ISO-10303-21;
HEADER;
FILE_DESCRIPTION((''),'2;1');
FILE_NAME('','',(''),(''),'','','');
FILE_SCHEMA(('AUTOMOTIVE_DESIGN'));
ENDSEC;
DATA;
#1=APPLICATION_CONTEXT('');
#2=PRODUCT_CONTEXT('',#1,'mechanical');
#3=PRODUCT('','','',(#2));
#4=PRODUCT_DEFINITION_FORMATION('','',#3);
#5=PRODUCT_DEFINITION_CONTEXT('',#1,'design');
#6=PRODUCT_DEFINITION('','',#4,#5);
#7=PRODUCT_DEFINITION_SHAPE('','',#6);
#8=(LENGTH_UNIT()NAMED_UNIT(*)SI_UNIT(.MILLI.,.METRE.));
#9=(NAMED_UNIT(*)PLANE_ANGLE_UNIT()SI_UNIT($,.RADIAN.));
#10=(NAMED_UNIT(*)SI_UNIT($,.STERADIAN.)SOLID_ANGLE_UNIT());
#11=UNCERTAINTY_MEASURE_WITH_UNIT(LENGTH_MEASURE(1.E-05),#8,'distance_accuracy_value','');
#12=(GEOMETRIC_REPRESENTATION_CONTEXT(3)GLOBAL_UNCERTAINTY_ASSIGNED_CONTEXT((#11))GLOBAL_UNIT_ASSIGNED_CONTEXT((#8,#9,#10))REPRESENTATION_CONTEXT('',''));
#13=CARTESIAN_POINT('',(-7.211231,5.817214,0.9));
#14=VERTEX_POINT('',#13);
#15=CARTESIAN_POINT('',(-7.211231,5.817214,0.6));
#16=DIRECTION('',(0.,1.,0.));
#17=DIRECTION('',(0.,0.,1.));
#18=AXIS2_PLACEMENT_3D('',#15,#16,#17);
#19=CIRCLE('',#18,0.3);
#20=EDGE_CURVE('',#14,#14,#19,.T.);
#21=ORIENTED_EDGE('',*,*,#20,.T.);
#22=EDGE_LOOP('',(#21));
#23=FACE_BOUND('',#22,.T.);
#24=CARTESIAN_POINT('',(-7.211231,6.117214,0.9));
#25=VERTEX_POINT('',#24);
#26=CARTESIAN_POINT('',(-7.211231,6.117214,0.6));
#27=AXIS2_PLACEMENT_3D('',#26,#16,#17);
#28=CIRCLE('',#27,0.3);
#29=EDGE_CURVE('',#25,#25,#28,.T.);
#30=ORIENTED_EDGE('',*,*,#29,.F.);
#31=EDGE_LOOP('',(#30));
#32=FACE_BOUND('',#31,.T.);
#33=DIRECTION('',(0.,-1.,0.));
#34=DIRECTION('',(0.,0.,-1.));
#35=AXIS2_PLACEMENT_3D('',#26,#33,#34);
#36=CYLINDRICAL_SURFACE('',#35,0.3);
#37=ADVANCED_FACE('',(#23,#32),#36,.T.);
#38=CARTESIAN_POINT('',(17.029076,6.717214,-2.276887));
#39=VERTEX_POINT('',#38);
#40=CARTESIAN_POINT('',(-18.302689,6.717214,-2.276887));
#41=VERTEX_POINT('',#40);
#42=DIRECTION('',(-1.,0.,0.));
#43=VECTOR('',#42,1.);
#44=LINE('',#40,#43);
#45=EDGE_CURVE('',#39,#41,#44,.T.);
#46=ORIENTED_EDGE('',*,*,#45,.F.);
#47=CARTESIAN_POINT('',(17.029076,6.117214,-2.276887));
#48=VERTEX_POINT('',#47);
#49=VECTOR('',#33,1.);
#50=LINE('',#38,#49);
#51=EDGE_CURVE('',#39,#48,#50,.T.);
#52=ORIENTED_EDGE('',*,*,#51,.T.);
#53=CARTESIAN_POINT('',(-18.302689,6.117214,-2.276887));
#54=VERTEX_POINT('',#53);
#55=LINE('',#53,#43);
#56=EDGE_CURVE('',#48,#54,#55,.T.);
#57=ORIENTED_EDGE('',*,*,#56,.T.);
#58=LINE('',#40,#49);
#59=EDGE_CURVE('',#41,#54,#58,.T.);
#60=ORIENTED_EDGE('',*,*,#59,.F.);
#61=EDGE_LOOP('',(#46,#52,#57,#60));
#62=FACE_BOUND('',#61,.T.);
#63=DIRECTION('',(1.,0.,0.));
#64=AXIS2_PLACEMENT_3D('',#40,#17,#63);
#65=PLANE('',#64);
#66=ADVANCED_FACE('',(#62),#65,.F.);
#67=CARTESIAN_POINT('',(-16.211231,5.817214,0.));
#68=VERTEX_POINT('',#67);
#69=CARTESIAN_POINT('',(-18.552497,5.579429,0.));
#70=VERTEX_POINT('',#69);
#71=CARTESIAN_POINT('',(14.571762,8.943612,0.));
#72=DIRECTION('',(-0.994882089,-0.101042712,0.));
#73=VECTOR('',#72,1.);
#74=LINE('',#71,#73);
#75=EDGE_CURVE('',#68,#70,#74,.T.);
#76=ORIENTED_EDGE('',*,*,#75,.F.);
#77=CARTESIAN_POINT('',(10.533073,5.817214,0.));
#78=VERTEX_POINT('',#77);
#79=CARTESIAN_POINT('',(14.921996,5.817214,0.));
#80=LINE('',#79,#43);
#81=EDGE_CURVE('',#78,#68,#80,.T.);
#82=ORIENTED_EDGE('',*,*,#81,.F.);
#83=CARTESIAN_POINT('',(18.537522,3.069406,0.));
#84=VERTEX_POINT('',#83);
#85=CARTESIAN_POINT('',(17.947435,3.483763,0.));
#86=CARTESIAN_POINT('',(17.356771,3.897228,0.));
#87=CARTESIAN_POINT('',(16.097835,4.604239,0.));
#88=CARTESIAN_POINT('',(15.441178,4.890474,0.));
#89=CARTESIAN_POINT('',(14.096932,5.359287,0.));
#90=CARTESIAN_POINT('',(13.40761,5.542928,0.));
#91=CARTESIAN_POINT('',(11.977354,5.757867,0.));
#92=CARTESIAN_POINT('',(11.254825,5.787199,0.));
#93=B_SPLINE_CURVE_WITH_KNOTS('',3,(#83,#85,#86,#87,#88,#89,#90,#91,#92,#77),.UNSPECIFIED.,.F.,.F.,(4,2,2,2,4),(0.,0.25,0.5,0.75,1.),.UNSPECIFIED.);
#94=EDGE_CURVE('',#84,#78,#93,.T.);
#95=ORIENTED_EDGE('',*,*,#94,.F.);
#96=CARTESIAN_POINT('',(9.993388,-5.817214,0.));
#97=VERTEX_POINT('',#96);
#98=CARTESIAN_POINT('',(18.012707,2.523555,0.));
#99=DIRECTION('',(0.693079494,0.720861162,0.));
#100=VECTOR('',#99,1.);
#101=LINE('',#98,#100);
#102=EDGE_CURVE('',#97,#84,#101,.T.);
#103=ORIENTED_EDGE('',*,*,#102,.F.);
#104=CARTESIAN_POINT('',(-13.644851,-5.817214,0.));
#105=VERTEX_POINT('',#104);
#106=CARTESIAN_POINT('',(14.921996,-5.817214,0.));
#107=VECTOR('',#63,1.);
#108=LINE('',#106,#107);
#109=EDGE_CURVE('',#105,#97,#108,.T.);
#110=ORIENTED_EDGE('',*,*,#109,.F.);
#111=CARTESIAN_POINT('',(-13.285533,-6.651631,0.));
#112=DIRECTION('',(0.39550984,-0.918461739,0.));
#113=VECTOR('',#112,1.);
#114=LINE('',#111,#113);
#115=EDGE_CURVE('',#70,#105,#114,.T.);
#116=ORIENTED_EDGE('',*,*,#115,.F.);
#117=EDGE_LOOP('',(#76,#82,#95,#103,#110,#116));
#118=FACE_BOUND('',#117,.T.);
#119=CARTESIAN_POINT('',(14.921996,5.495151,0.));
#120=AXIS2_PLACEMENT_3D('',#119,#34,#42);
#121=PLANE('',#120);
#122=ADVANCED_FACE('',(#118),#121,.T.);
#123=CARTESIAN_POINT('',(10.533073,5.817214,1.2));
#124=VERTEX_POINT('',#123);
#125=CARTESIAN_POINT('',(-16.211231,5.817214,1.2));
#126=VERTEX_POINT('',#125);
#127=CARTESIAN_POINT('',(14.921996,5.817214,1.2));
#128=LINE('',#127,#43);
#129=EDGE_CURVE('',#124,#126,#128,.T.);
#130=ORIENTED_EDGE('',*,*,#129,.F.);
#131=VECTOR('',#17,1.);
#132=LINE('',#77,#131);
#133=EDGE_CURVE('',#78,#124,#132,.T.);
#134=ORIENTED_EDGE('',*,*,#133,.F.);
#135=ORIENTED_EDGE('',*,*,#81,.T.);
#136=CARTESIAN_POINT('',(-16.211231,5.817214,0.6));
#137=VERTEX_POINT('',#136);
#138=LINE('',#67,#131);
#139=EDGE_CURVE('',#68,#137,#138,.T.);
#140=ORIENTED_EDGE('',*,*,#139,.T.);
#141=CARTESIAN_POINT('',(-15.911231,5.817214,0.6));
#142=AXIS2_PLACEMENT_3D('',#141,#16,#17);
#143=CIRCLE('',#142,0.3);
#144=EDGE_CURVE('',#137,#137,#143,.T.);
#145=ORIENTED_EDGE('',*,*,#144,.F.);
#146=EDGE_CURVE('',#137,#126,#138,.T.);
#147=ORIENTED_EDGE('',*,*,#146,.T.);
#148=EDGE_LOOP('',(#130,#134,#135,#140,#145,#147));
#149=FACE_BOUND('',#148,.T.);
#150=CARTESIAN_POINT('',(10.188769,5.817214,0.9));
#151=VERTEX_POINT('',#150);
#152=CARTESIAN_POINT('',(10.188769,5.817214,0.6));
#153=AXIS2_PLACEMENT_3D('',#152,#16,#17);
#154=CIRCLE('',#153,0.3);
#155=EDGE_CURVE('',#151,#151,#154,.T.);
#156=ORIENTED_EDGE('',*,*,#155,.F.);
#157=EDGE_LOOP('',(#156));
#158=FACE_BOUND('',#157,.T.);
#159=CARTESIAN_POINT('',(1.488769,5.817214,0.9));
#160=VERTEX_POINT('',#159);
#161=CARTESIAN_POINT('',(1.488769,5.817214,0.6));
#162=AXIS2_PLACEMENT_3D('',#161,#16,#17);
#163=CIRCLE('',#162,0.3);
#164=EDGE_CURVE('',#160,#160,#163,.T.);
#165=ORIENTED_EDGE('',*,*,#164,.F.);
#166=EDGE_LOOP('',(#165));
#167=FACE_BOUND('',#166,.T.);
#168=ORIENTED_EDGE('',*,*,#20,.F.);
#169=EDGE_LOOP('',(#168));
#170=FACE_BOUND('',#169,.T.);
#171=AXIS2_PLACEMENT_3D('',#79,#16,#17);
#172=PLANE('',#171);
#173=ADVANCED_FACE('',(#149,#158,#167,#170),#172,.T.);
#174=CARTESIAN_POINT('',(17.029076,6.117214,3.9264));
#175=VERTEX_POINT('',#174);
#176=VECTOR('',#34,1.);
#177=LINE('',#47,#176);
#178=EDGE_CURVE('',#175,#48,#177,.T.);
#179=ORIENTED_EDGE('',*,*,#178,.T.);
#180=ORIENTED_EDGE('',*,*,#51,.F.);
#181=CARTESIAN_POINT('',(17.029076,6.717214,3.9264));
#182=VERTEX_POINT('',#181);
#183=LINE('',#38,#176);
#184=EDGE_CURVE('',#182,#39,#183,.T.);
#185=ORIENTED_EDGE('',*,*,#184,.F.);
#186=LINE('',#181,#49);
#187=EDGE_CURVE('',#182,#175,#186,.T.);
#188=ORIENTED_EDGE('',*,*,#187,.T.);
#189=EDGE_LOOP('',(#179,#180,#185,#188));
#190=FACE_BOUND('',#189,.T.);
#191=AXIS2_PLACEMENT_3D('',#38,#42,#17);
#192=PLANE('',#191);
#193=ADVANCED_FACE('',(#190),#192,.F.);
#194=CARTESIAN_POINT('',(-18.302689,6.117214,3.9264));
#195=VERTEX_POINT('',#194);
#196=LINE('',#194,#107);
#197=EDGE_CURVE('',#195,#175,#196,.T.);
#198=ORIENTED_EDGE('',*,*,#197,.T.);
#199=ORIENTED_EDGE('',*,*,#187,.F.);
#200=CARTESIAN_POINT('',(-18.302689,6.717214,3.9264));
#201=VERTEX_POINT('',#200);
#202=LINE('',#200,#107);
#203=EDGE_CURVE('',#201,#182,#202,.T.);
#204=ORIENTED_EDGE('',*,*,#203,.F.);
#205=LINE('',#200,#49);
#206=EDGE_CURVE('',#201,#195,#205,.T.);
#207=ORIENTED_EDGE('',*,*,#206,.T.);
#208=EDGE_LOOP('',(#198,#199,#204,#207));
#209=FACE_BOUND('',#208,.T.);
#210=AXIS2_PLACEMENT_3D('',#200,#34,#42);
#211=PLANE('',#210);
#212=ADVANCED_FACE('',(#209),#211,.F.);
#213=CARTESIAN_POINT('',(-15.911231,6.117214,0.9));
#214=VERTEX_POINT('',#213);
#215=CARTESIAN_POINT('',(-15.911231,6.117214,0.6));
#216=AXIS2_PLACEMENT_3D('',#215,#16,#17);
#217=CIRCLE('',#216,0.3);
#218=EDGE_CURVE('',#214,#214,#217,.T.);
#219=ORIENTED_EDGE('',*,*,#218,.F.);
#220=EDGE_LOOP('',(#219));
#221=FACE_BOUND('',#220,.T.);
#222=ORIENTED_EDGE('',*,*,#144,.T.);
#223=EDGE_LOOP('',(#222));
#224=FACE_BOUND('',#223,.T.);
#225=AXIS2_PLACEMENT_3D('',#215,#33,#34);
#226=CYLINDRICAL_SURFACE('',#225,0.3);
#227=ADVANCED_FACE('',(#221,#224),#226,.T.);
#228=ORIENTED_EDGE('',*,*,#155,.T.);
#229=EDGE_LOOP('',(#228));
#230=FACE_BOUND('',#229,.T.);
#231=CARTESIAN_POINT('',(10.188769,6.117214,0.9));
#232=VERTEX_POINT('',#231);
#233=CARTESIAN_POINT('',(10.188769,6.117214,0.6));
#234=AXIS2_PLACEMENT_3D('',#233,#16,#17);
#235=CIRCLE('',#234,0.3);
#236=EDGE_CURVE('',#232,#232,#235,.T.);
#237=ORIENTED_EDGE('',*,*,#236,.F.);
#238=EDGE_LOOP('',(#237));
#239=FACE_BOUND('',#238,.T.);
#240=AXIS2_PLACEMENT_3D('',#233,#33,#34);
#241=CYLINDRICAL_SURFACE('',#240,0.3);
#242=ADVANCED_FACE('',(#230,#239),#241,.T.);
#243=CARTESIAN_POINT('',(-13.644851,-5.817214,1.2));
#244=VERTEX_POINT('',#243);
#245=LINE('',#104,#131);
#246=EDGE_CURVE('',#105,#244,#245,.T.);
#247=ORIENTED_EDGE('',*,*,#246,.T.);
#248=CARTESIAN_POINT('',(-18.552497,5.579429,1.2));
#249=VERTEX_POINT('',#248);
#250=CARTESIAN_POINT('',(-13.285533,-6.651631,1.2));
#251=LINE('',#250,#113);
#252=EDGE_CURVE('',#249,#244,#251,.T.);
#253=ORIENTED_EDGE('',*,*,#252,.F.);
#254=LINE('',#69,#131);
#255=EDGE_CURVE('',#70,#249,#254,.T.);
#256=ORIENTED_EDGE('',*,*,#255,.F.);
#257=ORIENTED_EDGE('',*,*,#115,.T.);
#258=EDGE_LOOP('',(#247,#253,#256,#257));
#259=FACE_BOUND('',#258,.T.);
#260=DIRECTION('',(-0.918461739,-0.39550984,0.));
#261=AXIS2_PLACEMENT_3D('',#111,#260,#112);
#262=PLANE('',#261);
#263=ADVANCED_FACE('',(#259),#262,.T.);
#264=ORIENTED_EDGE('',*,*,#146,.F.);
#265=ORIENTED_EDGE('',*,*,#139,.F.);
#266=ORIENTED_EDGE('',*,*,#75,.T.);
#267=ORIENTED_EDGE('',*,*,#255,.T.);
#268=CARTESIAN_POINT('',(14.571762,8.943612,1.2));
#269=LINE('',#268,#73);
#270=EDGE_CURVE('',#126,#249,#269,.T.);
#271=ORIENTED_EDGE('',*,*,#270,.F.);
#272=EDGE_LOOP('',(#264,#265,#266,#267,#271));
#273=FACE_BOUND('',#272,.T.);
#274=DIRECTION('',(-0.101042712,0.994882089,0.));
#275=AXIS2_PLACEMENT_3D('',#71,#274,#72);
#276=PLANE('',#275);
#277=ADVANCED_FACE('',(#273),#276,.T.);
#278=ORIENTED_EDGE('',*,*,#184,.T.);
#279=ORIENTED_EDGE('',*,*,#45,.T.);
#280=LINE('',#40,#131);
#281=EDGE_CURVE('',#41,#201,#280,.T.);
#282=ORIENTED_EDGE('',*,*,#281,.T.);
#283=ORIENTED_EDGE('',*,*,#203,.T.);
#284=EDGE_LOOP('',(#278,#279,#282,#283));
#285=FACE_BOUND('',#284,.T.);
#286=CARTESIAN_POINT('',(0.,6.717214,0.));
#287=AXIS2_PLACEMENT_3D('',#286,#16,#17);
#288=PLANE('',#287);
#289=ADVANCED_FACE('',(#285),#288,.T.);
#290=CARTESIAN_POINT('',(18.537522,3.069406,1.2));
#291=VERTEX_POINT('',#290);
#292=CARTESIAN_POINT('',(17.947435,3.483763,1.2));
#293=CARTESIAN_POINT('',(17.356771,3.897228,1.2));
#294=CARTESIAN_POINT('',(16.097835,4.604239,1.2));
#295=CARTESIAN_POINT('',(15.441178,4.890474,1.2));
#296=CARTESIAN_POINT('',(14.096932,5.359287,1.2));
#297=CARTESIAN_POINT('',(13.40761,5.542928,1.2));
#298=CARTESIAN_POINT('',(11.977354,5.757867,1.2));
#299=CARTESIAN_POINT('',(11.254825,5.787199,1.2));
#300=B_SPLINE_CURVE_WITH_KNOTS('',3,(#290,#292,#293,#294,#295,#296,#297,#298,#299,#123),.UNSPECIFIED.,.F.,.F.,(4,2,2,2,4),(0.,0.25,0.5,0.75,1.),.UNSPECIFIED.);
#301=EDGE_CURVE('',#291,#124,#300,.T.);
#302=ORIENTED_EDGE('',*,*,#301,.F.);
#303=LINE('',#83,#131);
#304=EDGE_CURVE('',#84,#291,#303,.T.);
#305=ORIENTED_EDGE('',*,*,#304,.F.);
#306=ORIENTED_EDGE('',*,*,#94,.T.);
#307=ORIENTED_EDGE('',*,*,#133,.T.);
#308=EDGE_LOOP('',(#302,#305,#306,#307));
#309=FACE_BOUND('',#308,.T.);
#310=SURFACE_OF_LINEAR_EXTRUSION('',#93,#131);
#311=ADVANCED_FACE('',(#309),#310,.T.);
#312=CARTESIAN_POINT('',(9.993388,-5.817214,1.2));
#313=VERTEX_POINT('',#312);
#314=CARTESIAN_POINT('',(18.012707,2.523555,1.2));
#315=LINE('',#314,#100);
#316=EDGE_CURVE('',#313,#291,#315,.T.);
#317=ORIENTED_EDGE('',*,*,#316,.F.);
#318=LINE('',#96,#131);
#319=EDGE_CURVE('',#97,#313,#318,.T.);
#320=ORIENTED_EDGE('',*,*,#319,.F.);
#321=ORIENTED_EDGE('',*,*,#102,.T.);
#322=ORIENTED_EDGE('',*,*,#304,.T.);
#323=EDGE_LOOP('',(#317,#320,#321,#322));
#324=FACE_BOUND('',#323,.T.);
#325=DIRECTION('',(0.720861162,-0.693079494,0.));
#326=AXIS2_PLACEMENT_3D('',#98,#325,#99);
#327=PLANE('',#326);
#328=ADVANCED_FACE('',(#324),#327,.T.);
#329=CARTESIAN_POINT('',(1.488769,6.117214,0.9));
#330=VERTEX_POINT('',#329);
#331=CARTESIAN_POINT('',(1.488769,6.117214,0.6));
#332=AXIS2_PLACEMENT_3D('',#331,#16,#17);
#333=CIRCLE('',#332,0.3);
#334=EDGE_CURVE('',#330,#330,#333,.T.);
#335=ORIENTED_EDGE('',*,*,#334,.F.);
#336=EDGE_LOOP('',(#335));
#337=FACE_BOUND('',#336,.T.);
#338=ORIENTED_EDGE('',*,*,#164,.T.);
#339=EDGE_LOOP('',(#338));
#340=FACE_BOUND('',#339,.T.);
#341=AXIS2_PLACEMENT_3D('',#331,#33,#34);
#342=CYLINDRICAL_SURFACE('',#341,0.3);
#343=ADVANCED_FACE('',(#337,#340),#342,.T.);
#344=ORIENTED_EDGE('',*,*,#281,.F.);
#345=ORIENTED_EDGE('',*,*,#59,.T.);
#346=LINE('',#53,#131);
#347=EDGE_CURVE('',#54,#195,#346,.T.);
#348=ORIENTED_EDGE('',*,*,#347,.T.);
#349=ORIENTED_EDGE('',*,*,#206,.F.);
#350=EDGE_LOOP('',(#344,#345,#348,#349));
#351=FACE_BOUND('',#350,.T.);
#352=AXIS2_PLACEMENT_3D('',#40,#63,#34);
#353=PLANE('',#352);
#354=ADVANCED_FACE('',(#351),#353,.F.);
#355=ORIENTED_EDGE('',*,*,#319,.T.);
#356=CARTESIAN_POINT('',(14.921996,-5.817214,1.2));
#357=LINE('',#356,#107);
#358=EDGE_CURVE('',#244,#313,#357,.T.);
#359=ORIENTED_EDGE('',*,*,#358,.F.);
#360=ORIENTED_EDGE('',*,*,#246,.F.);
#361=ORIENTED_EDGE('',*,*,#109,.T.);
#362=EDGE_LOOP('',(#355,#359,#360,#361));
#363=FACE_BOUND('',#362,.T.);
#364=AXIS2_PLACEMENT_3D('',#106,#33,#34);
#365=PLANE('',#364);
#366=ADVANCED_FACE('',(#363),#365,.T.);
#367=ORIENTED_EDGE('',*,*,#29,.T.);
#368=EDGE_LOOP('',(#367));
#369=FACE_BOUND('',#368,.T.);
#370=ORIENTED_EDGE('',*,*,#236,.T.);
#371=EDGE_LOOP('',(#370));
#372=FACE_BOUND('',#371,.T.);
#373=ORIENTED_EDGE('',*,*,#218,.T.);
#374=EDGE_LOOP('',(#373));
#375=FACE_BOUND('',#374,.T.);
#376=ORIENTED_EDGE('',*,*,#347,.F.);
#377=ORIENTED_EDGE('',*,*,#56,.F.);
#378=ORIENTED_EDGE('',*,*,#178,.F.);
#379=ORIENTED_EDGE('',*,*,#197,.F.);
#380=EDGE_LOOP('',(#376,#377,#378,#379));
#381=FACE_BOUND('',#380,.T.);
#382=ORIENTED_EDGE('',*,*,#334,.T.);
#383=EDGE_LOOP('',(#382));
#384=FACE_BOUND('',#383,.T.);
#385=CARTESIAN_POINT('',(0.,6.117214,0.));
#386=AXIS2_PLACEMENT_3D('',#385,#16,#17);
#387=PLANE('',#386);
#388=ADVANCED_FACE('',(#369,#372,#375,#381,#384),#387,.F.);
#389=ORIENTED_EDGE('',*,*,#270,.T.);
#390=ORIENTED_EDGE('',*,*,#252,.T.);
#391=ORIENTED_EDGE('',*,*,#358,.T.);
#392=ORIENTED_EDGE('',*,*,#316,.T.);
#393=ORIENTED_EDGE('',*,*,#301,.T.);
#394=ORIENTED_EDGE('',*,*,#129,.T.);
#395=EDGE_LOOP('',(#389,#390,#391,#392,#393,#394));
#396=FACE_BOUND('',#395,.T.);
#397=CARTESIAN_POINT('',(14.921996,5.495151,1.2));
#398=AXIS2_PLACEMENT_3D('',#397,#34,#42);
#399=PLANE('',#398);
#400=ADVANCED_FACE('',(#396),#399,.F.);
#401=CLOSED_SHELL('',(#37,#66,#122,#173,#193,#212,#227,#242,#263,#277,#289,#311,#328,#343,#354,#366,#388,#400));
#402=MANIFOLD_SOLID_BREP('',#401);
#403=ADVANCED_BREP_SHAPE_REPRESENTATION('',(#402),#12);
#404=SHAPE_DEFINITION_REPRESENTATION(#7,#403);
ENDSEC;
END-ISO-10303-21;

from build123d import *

# Parameters (mm, degrees)
EXTRUDE_1_DEPTH     = 1.2
CUT_EXTRUDE_START   = -1.2
CUT_EXTRUDE_1_DEPTH = 1.2
SKETCH_4_R          = 0.3
EXTRUDE_2_DEPTH     = 0.3
SKETCH_5_W          = 35.331764914
SKETCH_5_H          = 6.20328697
EXTRUDE_3_DEPTH     = 0.6


# Read off the part's stored shape, not the designer's step: Вырез-Вытянуть-Тонкостенный1
with BuildPart() as part:
    # Эскиз2 → Бобышка-Вытянуть1 (new body)
    with BuildSketch(Plane.XY):
        with BuildLine():
            Line((-18.718376773, 5.964639596), (-19.098029559, 5.834924894))
            Line((-19.098029559, 5.834924894), (-13.908113328, -6.217213911))
            Line((-13.908113328, -6.217213911), (10.163695982, -6.217213911))
            Line((10.163695982, -6.217213911), (19.098029559, 3.075246962))
            Line((19.098029559, 3.075246962), (18.818052215, 3.361181271))
            add(Edge.make_bspline(
                [(18.818052215, 3.361181271), (18.196335672, 3.797817809), (16.975433986, 4.6552669), (14.927683514, 5.553251977), (12.774537573, 6.124349252), (11.289757629, 6.1860932), (10.541386196, 6.217213911)],
                knots=[0, 0, 0, 0, 0.255164744, 0.501082157, 0.74853118, 1, 1, 1, 1], degree=3))
            Line((10.541386196, 6.217213911), (-16.231491208, 6.217213911))
            Line((-16.231491208, 6.217213911), (-18.718376773, 5.964639596))
        make_face()
    extrude(amount=EXTRUDE_1_DEPTH)

    # Вырез-Вытянуть-Тонкостенный1 outline → Вырез-Вытянуть-Тонкостенный1 (cut)
    with BuildSketch(Plane.XY.offset(1.2).offset(CUT_EXTRUDE_START)):
        with BuildLine():
            Line((19.098029559, 3.075246962), (18.818052215, 3.361181271))
            add(Edge.make_bspline(
                [(18.818052215, 3.361181271), (18.196335672, 3.797817809), (16.975433986, 4.6552669), (14.927683514, 5.553251977), (12.774537573, 6.124349252), (11.289757629, 6.1860932), (10.541386196, 6.217213911)],
                knots=[0, 0, 0, 0, 0.255164744, 0.501082157, 0.74853118, 1, 1, 1, 1], degree=3))
            Line((10.541386196, 6.217213911), (-16.231491208, 6.217213911))
            Line((-16.231491208, 6.217213911), (-18.718376773, 5.964639596))
            Line((-18.718376773, 5.964639596), (-19.098029559, 5.834924894))
            Line((-19.098029559, 5.834924894), (-13.908113328, -6.217213911))
            Line((-13.908113328, -6.217213911), (10.163695982, -6.217213911))
            Line((10.163695982, -6.217213911), (19.098029559, 3.075246962))
        make_face()
        with BuildLine():
            add(Edge.make_bspline(
                [(18.537521774, 3.069405939), (17.947435083, 3.483762917), (17.356771233, 3.89722808), (16.097834512, 4.604238585), (15.441178256, 4.89047439), (14.096932161, 5.359287166), (13.40761017, 5.542927998), (11.977353684, 5.757866724), (11.254825306, 5.787199054), (10.533072773, 5.817213911)],
                knots=[0, 0, 0, 0, 0.25, 0.25, 0.5, 0.5, 0.75, 0.75, 1, 1, 1, 1], degree=3))
            Line((18.537521774, 3.069405939), (9.993388288, -5.817213911))
            Line((9.993388288, -5.817213911), (-13.644851339, -5.817213911))
            Line((-13.644851339, -5.817213911), (-18.552496655, 5.5794291))
            Line((-18.552496655, 5.5794291), (-16.21123082, 5.817213911))
            Line((-16.21123082, 5.817213911), (10.533072773, 5.817213911))
        make_face(mode=Mode.SUBTRACT)
    extrude(amount=CUT_EXTRUDE_1_DEPTH, mode=Mode.SUBTRACT)

    # Эскиз4 → Бобышка-Вытянуть2 (add)
    with BuildSketch(Plane(origin=(0, 5.817213911, 0), x_dir=(1, 0, 0), z_dir=(0, 1, 0))):
        with Locations(Location((-15.91123082, -0.6, 0), (0, 0, 180))):
            Circle(SKETCH_4_R)
        with Locations(Location((-7.21123082, -0.6, 0), (0, 0, 270))):
            Circle(SKETCH_4_R)
        with Locations(Location((1.48876918, -0.6, 0), (0, 0, 270))):
            Circle(SKETCH_4_R)
        with Locations(Location((10.18876918, -0.6, 0), (0, 0, 270))):
            Circle(SKETCH_4_R)
    extrude(amount=EXTRUDE_2_DEPTH)

    # Эскиз5 → Бобышка-Вытянуть3 (add)
    with BuildSketch(Plane(origin=(0, 6.117213911, 0), x_dir=(1, 0, 0), z_dir=(0, 1, 0))):
        with Locations((-0.636806408, -0.824756774)):
            Rectangle(SKETCH_5_W, SKETCH_5_H)
    extrude(amount=EXTRUDE_3_DEPTH)


solid = part.part
